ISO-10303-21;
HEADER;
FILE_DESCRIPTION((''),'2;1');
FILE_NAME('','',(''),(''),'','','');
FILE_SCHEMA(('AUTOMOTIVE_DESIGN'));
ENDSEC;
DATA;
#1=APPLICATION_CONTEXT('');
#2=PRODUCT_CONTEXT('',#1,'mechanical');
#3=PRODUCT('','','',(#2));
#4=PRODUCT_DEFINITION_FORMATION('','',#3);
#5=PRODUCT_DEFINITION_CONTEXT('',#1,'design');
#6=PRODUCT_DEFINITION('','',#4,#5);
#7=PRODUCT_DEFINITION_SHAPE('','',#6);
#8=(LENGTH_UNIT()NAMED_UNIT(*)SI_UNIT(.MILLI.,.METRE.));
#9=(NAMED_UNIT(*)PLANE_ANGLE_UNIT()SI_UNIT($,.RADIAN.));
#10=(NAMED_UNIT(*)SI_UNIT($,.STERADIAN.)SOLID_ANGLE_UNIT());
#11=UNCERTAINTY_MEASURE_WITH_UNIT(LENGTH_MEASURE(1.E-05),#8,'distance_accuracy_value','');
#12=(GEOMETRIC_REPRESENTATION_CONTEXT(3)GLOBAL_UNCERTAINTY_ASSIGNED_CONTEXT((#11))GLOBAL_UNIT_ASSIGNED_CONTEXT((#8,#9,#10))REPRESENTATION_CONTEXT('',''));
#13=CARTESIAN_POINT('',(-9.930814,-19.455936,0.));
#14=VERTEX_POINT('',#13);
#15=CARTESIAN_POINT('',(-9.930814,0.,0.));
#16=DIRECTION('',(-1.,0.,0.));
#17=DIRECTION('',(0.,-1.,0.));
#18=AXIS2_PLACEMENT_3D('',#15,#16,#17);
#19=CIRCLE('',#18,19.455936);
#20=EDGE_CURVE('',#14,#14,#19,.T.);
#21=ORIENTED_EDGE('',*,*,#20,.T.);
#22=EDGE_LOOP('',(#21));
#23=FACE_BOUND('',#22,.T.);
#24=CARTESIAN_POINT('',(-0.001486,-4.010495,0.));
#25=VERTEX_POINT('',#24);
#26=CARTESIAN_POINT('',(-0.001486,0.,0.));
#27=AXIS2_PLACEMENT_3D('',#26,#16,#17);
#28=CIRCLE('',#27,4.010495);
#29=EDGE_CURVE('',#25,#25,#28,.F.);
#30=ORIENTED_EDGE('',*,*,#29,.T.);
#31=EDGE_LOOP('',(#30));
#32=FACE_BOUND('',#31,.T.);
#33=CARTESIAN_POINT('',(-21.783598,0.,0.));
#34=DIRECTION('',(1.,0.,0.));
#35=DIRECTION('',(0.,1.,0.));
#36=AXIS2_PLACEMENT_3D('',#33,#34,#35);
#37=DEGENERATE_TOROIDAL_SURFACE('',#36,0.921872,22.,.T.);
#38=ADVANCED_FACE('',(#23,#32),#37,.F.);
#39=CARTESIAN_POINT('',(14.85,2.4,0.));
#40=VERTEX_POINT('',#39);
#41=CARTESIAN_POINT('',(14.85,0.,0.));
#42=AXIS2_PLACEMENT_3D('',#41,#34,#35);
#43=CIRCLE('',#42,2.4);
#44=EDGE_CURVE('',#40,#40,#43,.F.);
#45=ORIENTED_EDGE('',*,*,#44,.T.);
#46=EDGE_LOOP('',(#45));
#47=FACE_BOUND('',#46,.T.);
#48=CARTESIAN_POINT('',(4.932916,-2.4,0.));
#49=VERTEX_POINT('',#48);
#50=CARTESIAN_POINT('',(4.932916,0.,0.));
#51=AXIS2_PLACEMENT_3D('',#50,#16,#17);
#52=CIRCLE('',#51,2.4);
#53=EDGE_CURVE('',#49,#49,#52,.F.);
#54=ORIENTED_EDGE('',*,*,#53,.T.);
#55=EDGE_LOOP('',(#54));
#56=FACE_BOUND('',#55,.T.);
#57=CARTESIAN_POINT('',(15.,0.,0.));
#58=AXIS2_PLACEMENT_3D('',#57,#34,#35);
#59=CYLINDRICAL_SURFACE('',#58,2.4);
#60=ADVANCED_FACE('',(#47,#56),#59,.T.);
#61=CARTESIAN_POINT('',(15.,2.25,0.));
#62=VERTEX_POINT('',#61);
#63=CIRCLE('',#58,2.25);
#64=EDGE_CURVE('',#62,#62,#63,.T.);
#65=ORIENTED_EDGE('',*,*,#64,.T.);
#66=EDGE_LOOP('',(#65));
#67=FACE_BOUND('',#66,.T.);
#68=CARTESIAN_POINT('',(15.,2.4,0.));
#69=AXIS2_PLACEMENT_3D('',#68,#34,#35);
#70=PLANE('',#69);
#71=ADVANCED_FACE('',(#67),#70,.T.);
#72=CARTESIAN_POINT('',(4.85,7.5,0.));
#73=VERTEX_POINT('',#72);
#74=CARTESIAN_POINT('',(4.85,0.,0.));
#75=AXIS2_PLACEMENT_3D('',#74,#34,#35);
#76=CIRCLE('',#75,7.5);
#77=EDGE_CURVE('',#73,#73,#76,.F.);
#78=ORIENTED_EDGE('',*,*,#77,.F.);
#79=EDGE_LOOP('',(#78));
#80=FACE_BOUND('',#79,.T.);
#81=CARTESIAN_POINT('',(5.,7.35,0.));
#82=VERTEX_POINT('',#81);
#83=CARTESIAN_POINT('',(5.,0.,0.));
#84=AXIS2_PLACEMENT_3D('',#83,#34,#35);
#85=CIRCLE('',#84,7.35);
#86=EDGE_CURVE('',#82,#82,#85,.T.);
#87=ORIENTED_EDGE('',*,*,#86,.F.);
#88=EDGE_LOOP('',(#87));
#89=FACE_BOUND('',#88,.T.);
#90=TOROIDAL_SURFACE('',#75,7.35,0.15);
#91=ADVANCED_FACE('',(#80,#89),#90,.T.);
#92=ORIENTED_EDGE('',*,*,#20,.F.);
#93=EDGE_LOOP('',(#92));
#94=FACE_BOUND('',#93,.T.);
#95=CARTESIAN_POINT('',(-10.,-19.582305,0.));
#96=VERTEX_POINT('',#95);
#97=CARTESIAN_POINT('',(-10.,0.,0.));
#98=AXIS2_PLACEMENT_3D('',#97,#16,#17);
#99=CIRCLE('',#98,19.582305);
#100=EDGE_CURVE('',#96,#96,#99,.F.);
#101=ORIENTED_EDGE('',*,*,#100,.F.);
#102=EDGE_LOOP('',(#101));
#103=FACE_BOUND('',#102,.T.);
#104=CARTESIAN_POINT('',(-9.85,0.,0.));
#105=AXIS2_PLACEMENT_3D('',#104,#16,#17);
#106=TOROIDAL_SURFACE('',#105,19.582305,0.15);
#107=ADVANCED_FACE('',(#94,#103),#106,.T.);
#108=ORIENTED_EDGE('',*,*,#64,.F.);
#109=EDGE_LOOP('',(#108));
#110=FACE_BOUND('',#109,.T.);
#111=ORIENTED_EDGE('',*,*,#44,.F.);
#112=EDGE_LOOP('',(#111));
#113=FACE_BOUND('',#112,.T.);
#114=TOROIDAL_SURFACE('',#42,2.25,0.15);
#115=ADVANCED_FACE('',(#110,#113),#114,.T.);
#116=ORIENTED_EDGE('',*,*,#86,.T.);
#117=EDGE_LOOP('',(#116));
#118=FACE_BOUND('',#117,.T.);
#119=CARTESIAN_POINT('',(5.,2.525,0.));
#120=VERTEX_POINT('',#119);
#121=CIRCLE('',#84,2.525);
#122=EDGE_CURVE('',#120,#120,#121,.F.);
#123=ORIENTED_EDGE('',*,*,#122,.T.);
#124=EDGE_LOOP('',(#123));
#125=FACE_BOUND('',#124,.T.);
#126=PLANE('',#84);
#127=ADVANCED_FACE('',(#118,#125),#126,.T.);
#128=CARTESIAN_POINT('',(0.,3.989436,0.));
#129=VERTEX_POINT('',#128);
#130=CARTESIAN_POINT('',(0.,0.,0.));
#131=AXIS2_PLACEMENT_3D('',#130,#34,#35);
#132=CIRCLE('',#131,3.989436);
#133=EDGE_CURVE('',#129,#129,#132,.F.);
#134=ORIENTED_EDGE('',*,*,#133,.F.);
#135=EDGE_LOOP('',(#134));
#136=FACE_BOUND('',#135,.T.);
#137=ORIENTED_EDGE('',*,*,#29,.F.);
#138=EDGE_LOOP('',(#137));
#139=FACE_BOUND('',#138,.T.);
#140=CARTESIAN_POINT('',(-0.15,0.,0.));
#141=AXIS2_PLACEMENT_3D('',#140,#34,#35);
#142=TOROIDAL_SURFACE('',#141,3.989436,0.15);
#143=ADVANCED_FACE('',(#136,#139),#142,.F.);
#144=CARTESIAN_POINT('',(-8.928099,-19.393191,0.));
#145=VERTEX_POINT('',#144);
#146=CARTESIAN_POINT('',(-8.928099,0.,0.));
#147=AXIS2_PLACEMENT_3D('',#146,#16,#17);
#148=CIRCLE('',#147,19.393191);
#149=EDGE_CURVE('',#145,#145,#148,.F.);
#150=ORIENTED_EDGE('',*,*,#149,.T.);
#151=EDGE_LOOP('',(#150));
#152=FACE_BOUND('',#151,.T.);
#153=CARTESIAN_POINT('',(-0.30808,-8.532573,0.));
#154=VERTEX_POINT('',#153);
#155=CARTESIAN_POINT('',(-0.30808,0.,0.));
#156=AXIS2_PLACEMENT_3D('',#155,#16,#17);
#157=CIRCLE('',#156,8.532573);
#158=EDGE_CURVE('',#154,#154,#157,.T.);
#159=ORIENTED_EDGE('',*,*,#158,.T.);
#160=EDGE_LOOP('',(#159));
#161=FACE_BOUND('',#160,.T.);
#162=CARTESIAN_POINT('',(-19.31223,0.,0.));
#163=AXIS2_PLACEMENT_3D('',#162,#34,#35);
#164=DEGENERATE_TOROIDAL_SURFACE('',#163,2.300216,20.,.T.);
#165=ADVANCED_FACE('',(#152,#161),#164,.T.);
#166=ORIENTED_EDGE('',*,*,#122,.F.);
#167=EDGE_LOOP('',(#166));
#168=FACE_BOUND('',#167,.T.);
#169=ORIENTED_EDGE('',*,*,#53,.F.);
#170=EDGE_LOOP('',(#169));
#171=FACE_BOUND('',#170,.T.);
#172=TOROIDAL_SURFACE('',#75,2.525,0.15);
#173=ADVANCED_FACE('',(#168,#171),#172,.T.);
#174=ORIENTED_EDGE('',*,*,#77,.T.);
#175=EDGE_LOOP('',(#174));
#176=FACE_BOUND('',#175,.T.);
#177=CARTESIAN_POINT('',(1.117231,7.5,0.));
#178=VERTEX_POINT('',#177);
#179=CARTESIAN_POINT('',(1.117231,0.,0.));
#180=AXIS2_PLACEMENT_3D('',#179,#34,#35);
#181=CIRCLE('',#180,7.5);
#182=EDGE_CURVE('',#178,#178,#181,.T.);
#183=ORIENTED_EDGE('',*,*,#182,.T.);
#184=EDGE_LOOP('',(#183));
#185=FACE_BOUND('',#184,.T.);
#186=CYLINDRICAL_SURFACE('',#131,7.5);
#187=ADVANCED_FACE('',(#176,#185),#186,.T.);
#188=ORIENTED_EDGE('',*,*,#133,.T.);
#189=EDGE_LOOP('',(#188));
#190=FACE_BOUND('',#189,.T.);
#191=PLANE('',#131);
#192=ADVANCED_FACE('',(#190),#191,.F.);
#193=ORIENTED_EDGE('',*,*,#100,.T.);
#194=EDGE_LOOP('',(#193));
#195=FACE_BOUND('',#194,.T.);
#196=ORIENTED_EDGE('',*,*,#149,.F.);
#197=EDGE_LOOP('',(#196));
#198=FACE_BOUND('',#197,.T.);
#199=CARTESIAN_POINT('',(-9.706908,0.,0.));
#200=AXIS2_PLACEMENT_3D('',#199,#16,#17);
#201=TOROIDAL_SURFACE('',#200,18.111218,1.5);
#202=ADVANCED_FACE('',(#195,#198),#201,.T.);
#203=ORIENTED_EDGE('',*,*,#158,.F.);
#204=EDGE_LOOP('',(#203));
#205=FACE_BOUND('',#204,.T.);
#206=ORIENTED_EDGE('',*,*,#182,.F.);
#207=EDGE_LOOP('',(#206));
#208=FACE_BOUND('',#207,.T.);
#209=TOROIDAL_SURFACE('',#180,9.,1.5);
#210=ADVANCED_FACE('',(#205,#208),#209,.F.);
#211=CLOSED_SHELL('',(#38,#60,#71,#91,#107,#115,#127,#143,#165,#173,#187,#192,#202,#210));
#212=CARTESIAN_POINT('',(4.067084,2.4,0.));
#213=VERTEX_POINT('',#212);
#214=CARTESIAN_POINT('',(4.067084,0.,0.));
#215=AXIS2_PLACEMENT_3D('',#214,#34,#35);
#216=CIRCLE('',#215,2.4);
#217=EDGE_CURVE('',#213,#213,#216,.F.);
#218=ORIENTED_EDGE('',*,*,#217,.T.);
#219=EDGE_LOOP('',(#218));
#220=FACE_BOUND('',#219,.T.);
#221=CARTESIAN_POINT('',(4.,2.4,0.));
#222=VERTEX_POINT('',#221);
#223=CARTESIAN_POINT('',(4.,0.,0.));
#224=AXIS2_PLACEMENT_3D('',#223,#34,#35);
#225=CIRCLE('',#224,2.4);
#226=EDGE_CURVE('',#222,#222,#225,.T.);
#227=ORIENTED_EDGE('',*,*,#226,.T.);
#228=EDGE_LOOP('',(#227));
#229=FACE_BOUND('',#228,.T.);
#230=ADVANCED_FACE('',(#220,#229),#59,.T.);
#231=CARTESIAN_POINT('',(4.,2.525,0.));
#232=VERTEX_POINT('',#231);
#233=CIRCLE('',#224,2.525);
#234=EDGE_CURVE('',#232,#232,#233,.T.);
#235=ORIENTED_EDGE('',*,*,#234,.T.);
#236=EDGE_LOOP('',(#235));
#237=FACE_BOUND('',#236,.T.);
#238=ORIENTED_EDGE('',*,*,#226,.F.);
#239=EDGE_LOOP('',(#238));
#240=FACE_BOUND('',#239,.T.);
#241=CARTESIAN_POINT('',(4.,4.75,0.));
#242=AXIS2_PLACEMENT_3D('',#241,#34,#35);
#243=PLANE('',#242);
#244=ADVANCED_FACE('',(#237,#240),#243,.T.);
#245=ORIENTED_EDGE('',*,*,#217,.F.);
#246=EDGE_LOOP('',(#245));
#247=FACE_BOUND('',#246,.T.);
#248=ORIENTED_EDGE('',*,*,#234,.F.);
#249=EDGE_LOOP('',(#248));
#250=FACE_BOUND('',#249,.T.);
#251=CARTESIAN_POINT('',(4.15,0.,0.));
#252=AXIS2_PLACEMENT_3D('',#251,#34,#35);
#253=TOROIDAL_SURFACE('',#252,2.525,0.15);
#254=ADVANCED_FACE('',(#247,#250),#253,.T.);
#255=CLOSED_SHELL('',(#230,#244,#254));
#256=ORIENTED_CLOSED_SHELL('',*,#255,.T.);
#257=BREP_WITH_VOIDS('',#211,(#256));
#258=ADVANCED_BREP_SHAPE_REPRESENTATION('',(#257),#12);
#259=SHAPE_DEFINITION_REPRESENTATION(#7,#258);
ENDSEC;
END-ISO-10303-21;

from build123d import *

# Parameters (mm, degrees)
FILLET1_R = 0.15
FILLET2_R = 1.5
FILLET3_R = 0.15


with BuildPart() as part:
    # Sketch1 → Revolve1 (revolve)
    with BuildSketch(Plane.XY):
        with BuildLine():
            Line((0, 4), (0, 0))
            Line((0, 0), (2, 0))
            Line((2, 0), (2, 4.75))
            Line((2, 4.75), (4, 4.75))
            Line((4, 4.75), (4, 2.375))
            Line((4, 2.375), (5, 2.375))
            Line((5, 2.375), (5, 7.5))
            Line((5, 7.5), (0, 7.5))
            ThreePointArc((0, 7.5), (-3.694854211, 14.794116631), (-10, 20))
            Line((-10, 20), (-10, 19.5))
            ThreePointArc((-10, 19.5), (-3.297071482, 12.84866356), (0, 4))
        make_face()
    revolve(axis=Axis((0, 0, 0), (-1, 0, 0)))

    # Fillet1
    fillet1_edges = [part.edges().sort_by_distance(p)[0] for p in [
        (0, -4, 0),
        (-10, -19.5, 0),
        (5, -7.5, 0),
        (5, -2.375, 0),
        (4, -2.375, 0),
    ]]
    fillet(fillet1_edges, radius=FILLET1_R)

    # Fillet2
    # the kernel refuses this fillet: 1.5 mm, written as the material it adds along each edge
    with BuildSketch(Plane(origin=(0, 0, 0), x_dir=(0, 1, 0), z_dir=(0, 0, 1))) as fillet2_piece_1:
        with BuildLine():
            CenterArc((9, -1.117230926), FILLET2_R, 108.15675825, 71.84324175)
            Line((7.5, -1.117230926), (7.5, 0))
            ThreePointArc((7.5, 0), (8.018361801, 0.147084824), (8.532573187, 0.308080329))
        make_face()
    revolve(axis=Axis((0, 0, 0), (-1, 0, 0)))
    # the kernel refuses this fillet: 1.5 mm, written as the material it takes off along each edge
    with BuildSketch(Plane(origin=(-10, 0, 0), x_dir=(0, 1, 0), z_dir=(0, 0, 1))) as fillet2_2_piece_1:
        with BuildLine():
            CenterArc((18.111217478, -0.293092194), FILLET2_R, 328.720951381, 42.546835999)
            ThreePointArc((19.393190597, -1.071902134), (19.704849183, -0.540623634), (20, 0))
            Line((20, 0), (19.58230448, 0))
        make_face()
    revolve(axis=Axis((-10, 0, 0), (-1, 0, 0)), mode=Mode.SUBTRACT)

    # Sketch2 → Revolve2 (revolve)
    with BuildSketch(Plane.XY):
        Polygon((2, 0), (2, 4.75), (4, 4.75), (4, 2.4), (15, 2.4), (15, 0), align=None)
    revolve(axis=Axis((15, 0, 0), (-1, 0, 0)))

    # Fillet3
    fillet3_edges = [part.edges().sort_by_distance(p)[0] for p in [
        (15, -2.4, 0),
    ]]
    fillet(fillet3_edges, radius=FILLET3_R)


solid = part.part
